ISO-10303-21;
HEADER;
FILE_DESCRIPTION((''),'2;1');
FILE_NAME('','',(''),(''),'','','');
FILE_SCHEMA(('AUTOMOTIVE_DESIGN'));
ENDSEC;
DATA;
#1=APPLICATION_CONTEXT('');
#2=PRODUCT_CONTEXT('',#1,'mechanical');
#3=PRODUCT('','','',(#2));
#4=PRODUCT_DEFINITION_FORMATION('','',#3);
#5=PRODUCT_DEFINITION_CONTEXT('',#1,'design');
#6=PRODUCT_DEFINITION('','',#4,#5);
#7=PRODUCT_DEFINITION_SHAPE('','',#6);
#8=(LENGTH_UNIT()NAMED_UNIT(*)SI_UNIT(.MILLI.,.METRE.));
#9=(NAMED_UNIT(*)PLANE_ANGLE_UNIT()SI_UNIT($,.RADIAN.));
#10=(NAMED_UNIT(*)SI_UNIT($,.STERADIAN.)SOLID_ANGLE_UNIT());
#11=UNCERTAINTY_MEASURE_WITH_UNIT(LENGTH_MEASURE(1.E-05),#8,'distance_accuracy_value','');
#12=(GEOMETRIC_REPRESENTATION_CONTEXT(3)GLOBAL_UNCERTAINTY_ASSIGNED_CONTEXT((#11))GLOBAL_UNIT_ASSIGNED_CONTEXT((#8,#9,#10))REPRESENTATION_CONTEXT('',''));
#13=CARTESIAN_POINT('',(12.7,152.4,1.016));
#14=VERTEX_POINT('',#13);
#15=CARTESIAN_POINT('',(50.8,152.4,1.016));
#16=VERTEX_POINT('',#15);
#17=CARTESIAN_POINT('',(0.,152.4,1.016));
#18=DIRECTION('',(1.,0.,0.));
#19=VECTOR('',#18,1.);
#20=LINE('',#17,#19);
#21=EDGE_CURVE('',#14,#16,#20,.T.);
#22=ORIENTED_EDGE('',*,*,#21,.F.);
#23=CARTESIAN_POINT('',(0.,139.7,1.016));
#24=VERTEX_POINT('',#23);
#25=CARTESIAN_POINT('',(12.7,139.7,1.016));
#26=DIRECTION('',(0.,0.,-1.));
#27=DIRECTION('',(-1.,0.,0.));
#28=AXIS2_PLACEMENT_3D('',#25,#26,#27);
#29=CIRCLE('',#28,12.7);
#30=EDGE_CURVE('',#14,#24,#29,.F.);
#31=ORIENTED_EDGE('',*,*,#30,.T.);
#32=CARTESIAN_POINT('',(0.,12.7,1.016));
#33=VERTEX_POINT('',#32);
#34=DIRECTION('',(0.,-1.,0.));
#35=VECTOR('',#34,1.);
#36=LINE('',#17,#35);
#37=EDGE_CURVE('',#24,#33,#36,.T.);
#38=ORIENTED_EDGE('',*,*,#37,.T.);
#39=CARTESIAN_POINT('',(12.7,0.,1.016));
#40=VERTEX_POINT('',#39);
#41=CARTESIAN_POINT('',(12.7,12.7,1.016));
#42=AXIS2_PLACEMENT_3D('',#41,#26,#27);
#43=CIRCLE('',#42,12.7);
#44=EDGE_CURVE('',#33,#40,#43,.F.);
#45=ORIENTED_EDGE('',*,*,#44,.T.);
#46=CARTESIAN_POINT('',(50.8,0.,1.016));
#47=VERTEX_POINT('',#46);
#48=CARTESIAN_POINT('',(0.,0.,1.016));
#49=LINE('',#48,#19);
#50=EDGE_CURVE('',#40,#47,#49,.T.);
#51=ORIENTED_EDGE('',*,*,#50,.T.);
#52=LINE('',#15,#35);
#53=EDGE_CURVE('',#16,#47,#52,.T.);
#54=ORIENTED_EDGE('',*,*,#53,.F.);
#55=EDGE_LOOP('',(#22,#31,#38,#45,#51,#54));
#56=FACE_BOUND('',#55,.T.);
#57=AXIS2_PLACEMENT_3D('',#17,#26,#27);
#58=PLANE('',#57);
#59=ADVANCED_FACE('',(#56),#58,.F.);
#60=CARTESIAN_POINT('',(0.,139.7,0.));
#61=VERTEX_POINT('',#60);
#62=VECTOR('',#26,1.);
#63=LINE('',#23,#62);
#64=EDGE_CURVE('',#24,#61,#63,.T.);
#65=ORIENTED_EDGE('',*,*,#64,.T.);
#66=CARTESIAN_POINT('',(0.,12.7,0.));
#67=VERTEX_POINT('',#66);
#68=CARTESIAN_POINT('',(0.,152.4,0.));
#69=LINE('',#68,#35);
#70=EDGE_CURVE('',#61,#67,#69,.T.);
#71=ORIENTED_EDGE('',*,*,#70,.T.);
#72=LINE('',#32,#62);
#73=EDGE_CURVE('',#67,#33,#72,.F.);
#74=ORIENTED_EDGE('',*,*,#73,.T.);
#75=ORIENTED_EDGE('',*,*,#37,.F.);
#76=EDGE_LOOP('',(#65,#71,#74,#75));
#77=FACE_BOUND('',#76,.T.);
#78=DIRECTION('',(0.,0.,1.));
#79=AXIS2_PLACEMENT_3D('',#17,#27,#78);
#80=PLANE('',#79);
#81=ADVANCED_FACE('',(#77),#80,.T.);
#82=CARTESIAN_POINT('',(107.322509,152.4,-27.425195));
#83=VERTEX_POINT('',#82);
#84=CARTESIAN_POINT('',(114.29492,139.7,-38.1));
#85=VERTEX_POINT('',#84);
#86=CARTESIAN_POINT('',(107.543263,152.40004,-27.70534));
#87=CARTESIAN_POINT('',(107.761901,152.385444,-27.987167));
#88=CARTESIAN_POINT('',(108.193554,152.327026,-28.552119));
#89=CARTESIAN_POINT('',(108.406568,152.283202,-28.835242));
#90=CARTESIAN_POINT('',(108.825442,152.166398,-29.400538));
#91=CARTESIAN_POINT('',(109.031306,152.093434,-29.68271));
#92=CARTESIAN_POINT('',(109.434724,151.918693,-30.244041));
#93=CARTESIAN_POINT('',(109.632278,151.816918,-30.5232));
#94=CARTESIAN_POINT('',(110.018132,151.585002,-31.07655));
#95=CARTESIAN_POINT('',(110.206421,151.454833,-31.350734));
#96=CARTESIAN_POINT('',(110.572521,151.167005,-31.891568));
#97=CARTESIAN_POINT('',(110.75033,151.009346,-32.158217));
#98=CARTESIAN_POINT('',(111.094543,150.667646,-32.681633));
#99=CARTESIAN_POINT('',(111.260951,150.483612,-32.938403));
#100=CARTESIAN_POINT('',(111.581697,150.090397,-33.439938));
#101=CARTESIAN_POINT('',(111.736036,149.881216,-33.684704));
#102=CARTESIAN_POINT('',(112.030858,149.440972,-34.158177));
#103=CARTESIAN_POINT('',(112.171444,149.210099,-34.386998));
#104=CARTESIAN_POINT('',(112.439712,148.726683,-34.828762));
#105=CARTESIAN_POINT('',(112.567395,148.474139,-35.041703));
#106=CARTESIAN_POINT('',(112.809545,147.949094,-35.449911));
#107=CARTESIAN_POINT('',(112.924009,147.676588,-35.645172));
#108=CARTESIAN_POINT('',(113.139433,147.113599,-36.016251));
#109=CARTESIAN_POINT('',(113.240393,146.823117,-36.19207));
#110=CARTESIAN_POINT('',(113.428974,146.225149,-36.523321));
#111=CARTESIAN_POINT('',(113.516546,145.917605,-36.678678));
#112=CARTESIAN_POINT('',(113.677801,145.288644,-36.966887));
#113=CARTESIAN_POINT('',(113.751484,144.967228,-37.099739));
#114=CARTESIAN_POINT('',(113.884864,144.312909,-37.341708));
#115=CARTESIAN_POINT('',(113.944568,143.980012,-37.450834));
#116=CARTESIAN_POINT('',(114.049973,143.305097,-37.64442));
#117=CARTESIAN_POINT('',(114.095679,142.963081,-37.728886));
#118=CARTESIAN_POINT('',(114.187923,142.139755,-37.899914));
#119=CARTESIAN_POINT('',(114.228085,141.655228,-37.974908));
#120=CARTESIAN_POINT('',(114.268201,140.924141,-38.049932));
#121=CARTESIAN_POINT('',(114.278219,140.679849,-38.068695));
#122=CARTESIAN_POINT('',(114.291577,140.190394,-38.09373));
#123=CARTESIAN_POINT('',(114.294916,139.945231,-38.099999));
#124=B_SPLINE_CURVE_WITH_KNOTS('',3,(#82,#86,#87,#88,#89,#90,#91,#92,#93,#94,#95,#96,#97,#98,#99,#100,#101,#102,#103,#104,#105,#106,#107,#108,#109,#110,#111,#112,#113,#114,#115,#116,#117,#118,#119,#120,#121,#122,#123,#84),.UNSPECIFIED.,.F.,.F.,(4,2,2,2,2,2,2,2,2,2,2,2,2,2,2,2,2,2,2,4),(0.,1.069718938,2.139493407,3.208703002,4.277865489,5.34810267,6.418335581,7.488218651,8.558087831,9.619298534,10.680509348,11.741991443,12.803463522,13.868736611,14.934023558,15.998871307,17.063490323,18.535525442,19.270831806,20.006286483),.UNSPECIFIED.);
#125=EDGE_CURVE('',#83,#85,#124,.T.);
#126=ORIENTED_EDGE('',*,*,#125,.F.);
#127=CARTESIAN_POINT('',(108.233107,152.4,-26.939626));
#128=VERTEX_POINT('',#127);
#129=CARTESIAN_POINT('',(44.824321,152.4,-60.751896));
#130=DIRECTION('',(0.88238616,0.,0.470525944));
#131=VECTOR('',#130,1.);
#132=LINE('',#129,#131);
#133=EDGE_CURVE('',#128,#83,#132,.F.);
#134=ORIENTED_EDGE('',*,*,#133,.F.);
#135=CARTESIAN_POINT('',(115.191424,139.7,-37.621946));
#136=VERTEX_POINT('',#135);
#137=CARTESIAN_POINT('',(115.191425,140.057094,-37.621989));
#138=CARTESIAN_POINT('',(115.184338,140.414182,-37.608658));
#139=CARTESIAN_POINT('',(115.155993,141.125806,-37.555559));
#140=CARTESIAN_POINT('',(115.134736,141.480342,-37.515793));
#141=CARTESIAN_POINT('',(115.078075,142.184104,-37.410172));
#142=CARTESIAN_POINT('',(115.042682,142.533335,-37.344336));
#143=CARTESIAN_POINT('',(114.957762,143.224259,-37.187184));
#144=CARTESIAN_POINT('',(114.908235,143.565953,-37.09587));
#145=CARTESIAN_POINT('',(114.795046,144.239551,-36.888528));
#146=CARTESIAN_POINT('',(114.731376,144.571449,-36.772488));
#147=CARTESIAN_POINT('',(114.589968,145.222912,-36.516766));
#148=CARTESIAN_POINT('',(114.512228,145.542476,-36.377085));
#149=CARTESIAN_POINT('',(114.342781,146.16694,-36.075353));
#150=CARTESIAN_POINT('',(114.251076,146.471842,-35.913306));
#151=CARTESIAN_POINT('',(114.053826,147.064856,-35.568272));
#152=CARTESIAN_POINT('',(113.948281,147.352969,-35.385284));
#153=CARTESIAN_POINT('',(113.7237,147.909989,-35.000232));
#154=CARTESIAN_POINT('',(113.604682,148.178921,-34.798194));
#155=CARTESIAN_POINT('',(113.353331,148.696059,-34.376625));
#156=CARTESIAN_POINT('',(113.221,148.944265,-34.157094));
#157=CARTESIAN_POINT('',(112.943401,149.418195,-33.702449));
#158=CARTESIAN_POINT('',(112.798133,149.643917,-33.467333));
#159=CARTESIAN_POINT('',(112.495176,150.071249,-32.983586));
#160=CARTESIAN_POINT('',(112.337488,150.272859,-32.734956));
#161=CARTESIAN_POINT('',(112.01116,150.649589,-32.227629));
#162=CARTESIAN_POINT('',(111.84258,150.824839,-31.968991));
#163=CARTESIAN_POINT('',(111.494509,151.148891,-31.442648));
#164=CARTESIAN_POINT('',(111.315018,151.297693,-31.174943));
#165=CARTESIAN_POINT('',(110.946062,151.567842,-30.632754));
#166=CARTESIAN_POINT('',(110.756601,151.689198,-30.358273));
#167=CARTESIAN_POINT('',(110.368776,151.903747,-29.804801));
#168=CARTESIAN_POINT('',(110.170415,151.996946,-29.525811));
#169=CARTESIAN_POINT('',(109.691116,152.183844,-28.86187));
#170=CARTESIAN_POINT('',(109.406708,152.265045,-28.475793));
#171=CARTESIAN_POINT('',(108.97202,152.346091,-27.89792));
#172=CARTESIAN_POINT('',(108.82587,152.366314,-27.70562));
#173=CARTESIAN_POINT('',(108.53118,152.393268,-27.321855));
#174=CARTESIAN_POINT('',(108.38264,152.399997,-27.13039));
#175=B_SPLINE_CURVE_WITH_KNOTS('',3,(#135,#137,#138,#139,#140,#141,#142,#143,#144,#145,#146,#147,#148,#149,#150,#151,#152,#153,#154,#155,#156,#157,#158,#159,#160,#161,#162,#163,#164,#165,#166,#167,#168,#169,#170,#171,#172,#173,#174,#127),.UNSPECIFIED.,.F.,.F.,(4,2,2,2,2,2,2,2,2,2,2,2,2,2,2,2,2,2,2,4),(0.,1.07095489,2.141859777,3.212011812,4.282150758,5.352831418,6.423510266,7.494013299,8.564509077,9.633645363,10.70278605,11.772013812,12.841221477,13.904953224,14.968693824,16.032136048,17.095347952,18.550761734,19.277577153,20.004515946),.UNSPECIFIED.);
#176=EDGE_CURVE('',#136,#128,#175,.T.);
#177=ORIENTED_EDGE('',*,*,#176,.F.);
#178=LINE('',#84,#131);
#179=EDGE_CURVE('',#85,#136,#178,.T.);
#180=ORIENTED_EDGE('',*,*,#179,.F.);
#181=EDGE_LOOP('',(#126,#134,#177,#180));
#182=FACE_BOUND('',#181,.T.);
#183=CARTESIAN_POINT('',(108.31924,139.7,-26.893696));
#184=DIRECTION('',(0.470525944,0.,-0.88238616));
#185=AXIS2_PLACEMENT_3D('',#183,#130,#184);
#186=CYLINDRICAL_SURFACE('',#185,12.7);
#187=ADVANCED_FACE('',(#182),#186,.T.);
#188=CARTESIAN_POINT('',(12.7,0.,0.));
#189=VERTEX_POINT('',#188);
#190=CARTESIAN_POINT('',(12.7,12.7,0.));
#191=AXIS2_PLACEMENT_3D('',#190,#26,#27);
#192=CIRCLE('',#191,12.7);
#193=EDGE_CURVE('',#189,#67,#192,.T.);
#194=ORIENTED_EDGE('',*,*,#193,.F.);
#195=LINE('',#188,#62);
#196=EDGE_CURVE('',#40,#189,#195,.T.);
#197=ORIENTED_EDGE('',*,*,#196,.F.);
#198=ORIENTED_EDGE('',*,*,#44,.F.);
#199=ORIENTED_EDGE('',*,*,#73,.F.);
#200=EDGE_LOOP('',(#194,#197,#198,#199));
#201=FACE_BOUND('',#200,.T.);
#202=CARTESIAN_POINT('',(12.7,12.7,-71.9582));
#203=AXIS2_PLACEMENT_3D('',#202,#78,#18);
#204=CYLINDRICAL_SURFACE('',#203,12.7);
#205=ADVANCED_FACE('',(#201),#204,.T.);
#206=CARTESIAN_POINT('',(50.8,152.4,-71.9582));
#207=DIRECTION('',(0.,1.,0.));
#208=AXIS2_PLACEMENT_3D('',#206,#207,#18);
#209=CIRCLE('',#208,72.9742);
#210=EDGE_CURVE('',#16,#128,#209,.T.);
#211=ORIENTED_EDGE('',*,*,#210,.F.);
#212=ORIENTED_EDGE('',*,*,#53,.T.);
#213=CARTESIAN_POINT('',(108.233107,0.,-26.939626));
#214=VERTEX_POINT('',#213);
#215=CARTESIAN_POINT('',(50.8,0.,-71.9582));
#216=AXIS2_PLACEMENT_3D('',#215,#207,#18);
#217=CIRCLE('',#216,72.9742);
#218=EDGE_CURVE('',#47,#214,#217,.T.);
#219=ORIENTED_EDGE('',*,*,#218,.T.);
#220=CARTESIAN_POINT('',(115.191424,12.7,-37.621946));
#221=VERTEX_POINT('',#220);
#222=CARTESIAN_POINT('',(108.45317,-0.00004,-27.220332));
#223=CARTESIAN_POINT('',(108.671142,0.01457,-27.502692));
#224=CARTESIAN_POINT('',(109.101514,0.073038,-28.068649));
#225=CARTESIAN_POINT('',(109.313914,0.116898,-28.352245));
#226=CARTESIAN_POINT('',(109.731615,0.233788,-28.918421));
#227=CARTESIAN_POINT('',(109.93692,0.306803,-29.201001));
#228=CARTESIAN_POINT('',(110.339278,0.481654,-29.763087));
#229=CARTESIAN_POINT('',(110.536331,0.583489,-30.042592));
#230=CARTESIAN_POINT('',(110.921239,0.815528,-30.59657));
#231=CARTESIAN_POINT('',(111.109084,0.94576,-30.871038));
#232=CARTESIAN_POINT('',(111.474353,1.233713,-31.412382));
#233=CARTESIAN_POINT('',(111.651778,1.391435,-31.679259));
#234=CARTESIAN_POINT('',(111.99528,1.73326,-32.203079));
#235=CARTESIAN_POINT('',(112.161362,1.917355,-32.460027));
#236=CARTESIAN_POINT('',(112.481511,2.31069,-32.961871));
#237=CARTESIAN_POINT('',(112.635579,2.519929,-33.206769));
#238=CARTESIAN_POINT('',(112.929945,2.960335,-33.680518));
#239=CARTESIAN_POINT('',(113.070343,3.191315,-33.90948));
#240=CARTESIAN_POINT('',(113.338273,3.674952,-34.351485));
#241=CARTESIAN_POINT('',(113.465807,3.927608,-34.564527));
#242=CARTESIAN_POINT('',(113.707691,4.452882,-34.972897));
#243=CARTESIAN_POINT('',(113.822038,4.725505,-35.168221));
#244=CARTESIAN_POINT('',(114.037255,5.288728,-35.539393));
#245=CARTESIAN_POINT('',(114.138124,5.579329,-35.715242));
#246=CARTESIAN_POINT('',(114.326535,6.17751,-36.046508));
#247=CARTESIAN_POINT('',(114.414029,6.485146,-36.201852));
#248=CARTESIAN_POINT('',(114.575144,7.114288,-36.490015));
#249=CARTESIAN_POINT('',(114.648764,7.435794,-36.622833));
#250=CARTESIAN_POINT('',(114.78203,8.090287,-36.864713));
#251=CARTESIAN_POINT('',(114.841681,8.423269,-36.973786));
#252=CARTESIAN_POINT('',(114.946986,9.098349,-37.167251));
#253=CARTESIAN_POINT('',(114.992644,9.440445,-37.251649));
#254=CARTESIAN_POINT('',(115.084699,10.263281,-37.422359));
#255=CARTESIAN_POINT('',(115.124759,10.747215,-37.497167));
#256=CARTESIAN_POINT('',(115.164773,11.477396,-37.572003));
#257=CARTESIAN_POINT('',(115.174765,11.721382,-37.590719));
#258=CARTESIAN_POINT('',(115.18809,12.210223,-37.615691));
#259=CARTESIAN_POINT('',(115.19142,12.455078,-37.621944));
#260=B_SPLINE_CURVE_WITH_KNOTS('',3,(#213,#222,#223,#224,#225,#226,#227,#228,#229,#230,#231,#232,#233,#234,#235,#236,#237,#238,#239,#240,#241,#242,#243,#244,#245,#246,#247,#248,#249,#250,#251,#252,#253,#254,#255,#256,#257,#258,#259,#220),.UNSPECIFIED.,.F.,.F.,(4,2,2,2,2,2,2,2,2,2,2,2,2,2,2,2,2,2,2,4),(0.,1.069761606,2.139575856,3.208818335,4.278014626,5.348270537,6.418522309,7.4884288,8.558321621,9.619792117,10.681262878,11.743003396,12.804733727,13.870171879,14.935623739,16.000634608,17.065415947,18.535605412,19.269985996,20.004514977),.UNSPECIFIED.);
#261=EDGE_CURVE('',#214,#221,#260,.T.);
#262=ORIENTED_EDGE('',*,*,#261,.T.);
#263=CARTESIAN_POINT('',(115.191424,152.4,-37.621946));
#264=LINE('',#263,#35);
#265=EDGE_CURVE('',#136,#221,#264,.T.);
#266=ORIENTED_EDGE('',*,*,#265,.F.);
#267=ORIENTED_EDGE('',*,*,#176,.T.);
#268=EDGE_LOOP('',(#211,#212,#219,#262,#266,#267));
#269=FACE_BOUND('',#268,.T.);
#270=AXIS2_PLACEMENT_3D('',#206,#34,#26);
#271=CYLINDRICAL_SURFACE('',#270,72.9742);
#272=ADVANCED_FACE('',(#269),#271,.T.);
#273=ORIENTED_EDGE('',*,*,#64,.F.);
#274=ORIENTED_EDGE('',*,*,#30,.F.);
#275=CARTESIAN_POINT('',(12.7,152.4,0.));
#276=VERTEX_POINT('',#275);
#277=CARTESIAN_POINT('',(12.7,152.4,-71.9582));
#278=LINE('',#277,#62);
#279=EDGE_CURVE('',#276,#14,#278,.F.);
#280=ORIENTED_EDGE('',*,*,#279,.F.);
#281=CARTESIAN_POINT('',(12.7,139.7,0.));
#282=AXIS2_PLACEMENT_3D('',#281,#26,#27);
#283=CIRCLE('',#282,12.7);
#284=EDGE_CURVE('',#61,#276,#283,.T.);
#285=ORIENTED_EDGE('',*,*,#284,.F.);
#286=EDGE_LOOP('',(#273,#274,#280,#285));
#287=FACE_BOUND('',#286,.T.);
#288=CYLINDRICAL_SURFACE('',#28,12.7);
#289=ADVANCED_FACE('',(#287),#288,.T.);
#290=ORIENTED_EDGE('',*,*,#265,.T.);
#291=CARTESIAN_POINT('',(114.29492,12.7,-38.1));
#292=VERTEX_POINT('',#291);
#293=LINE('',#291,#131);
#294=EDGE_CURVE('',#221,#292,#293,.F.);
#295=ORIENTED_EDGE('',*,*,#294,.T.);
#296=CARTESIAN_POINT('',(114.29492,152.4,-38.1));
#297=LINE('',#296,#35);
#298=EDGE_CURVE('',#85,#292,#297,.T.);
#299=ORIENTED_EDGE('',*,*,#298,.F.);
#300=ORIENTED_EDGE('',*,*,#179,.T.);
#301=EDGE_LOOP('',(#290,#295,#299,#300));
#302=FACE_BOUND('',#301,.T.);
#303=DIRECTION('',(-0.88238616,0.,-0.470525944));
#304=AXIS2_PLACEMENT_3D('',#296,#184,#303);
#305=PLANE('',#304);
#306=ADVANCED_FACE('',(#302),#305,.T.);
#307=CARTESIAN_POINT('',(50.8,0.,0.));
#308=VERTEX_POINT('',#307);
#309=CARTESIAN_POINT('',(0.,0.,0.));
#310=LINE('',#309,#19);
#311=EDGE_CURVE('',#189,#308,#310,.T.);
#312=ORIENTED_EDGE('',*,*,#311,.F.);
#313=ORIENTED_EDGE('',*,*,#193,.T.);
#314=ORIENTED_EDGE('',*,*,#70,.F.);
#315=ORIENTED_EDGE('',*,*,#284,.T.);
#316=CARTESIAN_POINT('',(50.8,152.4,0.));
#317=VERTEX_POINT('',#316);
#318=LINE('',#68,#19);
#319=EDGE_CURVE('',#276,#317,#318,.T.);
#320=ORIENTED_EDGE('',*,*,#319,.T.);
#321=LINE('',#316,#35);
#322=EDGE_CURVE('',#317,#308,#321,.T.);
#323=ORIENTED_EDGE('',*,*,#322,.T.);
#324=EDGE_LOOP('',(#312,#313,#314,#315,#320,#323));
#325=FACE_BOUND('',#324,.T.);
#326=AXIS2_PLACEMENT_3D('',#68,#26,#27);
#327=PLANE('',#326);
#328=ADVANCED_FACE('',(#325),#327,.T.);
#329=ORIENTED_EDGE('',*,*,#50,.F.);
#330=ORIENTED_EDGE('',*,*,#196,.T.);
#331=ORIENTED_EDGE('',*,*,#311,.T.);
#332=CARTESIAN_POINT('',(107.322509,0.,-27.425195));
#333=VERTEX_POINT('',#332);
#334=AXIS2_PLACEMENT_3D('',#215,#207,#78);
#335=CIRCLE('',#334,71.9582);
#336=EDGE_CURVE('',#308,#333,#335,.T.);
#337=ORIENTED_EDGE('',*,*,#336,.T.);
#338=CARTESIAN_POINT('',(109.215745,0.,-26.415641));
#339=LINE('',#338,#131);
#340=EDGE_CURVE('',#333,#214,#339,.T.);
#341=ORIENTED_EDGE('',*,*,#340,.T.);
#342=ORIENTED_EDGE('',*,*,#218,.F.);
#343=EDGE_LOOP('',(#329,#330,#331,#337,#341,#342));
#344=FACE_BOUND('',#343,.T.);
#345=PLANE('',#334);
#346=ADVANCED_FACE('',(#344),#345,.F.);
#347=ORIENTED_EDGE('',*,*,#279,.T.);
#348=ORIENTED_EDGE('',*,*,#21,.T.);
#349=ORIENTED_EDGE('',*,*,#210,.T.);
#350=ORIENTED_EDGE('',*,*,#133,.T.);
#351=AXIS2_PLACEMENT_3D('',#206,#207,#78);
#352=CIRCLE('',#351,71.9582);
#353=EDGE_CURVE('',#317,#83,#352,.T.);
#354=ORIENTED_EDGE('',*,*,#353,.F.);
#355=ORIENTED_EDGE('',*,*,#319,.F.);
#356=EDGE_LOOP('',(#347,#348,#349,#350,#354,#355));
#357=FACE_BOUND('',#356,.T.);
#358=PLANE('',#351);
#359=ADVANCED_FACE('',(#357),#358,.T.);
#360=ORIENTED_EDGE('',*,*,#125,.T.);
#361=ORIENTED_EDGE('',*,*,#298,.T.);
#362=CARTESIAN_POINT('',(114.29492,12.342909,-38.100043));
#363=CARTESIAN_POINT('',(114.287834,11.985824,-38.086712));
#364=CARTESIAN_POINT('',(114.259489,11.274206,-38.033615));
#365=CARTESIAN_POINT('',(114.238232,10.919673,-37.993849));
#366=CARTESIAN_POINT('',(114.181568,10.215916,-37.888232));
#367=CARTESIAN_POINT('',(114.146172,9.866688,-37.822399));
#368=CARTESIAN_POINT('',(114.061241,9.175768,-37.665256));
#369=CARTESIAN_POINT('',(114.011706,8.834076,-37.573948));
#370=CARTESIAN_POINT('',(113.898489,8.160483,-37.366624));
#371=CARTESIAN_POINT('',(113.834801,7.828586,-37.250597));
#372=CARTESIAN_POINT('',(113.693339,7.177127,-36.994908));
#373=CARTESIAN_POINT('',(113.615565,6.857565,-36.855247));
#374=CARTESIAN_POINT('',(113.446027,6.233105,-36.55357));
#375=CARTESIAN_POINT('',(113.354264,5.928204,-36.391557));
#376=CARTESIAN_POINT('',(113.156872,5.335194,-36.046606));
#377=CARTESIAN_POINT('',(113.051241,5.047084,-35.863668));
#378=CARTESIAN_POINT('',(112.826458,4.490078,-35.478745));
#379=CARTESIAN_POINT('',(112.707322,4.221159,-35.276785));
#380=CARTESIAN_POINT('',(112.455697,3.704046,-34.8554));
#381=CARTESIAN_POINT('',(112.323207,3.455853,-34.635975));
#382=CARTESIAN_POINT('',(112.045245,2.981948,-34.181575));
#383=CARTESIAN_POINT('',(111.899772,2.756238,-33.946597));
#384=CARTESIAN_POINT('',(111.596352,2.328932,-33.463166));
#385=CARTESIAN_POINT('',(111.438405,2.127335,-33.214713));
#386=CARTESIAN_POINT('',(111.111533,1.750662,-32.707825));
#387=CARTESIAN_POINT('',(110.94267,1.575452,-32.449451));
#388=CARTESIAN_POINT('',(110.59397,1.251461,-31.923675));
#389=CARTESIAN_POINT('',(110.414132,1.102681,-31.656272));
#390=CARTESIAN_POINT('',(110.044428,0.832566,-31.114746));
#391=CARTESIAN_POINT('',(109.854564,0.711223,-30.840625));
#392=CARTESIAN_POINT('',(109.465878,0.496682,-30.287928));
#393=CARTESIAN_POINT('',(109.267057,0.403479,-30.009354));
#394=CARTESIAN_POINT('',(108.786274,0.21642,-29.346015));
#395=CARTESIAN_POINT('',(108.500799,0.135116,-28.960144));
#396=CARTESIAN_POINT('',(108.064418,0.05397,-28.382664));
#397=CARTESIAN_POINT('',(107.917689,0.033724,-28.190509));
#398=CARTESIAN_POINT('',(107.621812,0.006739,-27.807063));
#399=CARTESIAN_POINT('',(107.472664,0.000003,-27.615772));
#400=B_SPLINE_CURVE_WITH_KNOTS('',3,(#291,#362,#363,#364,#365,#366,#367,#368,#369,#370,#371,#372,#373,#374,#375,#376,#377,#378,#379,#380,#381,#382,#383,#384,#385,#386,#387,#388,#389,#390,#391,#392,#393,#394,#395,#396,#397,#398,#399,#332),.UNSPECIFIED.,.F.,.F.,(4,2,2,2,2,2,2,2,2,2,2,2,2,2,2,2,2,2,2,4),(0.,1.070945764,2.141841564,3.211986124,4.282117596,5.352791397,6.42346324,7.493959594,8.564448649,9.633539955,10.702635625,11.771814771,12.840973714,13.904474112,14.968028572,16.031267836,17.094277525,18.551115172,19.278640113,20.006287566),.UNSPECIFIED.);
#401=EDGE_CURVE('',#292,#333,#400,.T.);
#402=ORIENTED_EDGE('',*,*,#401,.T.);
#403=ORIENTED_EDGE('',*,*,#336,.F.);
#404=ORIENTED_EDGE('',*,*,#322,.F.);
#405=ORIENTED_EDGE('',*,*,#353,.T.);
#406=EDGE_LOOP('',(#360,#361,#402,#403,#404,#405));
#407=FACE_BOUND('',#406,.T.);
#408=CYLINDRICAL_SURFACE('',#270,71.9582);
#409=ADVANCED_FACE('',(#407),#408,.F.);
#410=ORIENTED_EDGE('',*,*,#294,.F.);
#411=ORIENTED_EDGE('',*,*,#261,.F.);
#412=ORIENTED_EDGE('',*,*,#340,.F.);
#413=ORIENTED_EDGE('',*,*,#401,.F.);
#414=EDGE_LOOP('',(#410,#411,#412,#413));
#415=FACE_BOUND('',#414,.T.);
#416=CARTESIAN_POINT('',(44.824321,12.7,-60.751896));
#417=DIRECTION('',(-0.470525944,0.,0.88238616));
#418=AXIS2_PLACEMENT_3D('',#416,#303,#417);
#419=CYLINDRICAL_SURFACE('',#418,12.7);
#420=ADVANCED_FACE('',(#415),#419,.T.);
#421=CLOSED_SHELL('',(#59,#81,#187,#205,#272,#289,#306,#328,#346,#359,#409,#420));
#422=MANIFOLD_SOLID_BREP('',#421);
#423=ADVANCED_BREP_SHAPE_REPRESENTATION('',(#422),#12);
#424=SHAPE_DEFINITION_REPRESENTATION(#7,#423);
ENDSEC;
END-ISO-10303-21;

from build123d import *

# Parameters (mm, degrees)
EXTRUDE_THIN1_DEPTH = 152.4
FILLET1_START       = -34.928197123
FILLET1_DEPTH       = 36.928197123
FILLET1_START_2     = 1.736605499
FILLET1_2_DEPTH     = 83.263394501


with BuildPart() as part:
    # Sketch1 → Extrude-Thin1 (new body)
    with BuildSketch(Plane(origin=(0, 0, 0), x_dir=(1, 0, 0), z_dir=(0, 1, 0))):
        with BuildLine():
            Line((0, 0), (50.8, 0))
            ThreePointArc((50.8, 0), (87.824366436, 10.255859386), (114.294919797, 38.1))
            Line((114.294919797, 38.1), (115.191424136, 37.621945641))
            ThreePointArc((115.191424136, 37.621945641), (88.347124875, 9.384665025), (50.8, -1.016))
            Line((50.8, -1.016), (0, -1.016))
            Line((0, -1.016), (0, 0))
        make_face()
    extrude(amount=EXTRUDE_THIN1_DEPTH)

    # Fillet1: read off the stored shape, not the designer's step
    # Fillet1 outline → Fillet1 (cut)
    with BuildSketch(Plane.XY.offset(FILLET1_START)):
        with BuildLine():
            Line((0, 152.4), (0, 139.7))
            ThreePointArc((0, 139.7), (3.719743879, 148.680256121), (12.7, 152.4))
            Line((12.7, 152.4), (0, 152.4))
        make_face()
        with BuildLine():
            ThreePointArc((12.7, 0), (3.719743879, 3.719743879), (0, 12.7))
            Line((0, 12.7), (0, 0))
            Line((0, 0), (12.7, 0))
        make_face()
    extrude(amount=FILLET1_DEPTH, mode=Mode.SUBTRACT)

    # Fillet1 2 outline → Fillet1 2 (cut)
    with BuildSketch(Plane(origin=(0, 0, 0), x_dir=(0.4705259442287449, 0, -0.8823861602539153), z_dir=(0.8823861602539151, 0, 0.47052594422874505)).offset(FILLET1_START_2)):
        with BuildLine():
            Line((87.397637764, 0), (87.397637764, 12.7))
            ThreePointArc((87.397637764, 12.7), (83.677893885, 3.719743879), (74.697637764, 0))
            Line((74.697637764, 0), (87.397637764, 0))
        make_face()
        with BuildLine():
            ThreePointArc((74.697637764, 152.4), (83.677893885, 148.680256121), (87.397637764, 139.7))
            Line((87.397637764, 139.7), (87.397637764, 152.4))
            Line((87.397637764, 152.4), (74.697637764, 152.4))
        make_face()
    extrude(amount=FILLET1_2_DEPTH, mode=Mode.SUBTRACT)


solid = part.part
